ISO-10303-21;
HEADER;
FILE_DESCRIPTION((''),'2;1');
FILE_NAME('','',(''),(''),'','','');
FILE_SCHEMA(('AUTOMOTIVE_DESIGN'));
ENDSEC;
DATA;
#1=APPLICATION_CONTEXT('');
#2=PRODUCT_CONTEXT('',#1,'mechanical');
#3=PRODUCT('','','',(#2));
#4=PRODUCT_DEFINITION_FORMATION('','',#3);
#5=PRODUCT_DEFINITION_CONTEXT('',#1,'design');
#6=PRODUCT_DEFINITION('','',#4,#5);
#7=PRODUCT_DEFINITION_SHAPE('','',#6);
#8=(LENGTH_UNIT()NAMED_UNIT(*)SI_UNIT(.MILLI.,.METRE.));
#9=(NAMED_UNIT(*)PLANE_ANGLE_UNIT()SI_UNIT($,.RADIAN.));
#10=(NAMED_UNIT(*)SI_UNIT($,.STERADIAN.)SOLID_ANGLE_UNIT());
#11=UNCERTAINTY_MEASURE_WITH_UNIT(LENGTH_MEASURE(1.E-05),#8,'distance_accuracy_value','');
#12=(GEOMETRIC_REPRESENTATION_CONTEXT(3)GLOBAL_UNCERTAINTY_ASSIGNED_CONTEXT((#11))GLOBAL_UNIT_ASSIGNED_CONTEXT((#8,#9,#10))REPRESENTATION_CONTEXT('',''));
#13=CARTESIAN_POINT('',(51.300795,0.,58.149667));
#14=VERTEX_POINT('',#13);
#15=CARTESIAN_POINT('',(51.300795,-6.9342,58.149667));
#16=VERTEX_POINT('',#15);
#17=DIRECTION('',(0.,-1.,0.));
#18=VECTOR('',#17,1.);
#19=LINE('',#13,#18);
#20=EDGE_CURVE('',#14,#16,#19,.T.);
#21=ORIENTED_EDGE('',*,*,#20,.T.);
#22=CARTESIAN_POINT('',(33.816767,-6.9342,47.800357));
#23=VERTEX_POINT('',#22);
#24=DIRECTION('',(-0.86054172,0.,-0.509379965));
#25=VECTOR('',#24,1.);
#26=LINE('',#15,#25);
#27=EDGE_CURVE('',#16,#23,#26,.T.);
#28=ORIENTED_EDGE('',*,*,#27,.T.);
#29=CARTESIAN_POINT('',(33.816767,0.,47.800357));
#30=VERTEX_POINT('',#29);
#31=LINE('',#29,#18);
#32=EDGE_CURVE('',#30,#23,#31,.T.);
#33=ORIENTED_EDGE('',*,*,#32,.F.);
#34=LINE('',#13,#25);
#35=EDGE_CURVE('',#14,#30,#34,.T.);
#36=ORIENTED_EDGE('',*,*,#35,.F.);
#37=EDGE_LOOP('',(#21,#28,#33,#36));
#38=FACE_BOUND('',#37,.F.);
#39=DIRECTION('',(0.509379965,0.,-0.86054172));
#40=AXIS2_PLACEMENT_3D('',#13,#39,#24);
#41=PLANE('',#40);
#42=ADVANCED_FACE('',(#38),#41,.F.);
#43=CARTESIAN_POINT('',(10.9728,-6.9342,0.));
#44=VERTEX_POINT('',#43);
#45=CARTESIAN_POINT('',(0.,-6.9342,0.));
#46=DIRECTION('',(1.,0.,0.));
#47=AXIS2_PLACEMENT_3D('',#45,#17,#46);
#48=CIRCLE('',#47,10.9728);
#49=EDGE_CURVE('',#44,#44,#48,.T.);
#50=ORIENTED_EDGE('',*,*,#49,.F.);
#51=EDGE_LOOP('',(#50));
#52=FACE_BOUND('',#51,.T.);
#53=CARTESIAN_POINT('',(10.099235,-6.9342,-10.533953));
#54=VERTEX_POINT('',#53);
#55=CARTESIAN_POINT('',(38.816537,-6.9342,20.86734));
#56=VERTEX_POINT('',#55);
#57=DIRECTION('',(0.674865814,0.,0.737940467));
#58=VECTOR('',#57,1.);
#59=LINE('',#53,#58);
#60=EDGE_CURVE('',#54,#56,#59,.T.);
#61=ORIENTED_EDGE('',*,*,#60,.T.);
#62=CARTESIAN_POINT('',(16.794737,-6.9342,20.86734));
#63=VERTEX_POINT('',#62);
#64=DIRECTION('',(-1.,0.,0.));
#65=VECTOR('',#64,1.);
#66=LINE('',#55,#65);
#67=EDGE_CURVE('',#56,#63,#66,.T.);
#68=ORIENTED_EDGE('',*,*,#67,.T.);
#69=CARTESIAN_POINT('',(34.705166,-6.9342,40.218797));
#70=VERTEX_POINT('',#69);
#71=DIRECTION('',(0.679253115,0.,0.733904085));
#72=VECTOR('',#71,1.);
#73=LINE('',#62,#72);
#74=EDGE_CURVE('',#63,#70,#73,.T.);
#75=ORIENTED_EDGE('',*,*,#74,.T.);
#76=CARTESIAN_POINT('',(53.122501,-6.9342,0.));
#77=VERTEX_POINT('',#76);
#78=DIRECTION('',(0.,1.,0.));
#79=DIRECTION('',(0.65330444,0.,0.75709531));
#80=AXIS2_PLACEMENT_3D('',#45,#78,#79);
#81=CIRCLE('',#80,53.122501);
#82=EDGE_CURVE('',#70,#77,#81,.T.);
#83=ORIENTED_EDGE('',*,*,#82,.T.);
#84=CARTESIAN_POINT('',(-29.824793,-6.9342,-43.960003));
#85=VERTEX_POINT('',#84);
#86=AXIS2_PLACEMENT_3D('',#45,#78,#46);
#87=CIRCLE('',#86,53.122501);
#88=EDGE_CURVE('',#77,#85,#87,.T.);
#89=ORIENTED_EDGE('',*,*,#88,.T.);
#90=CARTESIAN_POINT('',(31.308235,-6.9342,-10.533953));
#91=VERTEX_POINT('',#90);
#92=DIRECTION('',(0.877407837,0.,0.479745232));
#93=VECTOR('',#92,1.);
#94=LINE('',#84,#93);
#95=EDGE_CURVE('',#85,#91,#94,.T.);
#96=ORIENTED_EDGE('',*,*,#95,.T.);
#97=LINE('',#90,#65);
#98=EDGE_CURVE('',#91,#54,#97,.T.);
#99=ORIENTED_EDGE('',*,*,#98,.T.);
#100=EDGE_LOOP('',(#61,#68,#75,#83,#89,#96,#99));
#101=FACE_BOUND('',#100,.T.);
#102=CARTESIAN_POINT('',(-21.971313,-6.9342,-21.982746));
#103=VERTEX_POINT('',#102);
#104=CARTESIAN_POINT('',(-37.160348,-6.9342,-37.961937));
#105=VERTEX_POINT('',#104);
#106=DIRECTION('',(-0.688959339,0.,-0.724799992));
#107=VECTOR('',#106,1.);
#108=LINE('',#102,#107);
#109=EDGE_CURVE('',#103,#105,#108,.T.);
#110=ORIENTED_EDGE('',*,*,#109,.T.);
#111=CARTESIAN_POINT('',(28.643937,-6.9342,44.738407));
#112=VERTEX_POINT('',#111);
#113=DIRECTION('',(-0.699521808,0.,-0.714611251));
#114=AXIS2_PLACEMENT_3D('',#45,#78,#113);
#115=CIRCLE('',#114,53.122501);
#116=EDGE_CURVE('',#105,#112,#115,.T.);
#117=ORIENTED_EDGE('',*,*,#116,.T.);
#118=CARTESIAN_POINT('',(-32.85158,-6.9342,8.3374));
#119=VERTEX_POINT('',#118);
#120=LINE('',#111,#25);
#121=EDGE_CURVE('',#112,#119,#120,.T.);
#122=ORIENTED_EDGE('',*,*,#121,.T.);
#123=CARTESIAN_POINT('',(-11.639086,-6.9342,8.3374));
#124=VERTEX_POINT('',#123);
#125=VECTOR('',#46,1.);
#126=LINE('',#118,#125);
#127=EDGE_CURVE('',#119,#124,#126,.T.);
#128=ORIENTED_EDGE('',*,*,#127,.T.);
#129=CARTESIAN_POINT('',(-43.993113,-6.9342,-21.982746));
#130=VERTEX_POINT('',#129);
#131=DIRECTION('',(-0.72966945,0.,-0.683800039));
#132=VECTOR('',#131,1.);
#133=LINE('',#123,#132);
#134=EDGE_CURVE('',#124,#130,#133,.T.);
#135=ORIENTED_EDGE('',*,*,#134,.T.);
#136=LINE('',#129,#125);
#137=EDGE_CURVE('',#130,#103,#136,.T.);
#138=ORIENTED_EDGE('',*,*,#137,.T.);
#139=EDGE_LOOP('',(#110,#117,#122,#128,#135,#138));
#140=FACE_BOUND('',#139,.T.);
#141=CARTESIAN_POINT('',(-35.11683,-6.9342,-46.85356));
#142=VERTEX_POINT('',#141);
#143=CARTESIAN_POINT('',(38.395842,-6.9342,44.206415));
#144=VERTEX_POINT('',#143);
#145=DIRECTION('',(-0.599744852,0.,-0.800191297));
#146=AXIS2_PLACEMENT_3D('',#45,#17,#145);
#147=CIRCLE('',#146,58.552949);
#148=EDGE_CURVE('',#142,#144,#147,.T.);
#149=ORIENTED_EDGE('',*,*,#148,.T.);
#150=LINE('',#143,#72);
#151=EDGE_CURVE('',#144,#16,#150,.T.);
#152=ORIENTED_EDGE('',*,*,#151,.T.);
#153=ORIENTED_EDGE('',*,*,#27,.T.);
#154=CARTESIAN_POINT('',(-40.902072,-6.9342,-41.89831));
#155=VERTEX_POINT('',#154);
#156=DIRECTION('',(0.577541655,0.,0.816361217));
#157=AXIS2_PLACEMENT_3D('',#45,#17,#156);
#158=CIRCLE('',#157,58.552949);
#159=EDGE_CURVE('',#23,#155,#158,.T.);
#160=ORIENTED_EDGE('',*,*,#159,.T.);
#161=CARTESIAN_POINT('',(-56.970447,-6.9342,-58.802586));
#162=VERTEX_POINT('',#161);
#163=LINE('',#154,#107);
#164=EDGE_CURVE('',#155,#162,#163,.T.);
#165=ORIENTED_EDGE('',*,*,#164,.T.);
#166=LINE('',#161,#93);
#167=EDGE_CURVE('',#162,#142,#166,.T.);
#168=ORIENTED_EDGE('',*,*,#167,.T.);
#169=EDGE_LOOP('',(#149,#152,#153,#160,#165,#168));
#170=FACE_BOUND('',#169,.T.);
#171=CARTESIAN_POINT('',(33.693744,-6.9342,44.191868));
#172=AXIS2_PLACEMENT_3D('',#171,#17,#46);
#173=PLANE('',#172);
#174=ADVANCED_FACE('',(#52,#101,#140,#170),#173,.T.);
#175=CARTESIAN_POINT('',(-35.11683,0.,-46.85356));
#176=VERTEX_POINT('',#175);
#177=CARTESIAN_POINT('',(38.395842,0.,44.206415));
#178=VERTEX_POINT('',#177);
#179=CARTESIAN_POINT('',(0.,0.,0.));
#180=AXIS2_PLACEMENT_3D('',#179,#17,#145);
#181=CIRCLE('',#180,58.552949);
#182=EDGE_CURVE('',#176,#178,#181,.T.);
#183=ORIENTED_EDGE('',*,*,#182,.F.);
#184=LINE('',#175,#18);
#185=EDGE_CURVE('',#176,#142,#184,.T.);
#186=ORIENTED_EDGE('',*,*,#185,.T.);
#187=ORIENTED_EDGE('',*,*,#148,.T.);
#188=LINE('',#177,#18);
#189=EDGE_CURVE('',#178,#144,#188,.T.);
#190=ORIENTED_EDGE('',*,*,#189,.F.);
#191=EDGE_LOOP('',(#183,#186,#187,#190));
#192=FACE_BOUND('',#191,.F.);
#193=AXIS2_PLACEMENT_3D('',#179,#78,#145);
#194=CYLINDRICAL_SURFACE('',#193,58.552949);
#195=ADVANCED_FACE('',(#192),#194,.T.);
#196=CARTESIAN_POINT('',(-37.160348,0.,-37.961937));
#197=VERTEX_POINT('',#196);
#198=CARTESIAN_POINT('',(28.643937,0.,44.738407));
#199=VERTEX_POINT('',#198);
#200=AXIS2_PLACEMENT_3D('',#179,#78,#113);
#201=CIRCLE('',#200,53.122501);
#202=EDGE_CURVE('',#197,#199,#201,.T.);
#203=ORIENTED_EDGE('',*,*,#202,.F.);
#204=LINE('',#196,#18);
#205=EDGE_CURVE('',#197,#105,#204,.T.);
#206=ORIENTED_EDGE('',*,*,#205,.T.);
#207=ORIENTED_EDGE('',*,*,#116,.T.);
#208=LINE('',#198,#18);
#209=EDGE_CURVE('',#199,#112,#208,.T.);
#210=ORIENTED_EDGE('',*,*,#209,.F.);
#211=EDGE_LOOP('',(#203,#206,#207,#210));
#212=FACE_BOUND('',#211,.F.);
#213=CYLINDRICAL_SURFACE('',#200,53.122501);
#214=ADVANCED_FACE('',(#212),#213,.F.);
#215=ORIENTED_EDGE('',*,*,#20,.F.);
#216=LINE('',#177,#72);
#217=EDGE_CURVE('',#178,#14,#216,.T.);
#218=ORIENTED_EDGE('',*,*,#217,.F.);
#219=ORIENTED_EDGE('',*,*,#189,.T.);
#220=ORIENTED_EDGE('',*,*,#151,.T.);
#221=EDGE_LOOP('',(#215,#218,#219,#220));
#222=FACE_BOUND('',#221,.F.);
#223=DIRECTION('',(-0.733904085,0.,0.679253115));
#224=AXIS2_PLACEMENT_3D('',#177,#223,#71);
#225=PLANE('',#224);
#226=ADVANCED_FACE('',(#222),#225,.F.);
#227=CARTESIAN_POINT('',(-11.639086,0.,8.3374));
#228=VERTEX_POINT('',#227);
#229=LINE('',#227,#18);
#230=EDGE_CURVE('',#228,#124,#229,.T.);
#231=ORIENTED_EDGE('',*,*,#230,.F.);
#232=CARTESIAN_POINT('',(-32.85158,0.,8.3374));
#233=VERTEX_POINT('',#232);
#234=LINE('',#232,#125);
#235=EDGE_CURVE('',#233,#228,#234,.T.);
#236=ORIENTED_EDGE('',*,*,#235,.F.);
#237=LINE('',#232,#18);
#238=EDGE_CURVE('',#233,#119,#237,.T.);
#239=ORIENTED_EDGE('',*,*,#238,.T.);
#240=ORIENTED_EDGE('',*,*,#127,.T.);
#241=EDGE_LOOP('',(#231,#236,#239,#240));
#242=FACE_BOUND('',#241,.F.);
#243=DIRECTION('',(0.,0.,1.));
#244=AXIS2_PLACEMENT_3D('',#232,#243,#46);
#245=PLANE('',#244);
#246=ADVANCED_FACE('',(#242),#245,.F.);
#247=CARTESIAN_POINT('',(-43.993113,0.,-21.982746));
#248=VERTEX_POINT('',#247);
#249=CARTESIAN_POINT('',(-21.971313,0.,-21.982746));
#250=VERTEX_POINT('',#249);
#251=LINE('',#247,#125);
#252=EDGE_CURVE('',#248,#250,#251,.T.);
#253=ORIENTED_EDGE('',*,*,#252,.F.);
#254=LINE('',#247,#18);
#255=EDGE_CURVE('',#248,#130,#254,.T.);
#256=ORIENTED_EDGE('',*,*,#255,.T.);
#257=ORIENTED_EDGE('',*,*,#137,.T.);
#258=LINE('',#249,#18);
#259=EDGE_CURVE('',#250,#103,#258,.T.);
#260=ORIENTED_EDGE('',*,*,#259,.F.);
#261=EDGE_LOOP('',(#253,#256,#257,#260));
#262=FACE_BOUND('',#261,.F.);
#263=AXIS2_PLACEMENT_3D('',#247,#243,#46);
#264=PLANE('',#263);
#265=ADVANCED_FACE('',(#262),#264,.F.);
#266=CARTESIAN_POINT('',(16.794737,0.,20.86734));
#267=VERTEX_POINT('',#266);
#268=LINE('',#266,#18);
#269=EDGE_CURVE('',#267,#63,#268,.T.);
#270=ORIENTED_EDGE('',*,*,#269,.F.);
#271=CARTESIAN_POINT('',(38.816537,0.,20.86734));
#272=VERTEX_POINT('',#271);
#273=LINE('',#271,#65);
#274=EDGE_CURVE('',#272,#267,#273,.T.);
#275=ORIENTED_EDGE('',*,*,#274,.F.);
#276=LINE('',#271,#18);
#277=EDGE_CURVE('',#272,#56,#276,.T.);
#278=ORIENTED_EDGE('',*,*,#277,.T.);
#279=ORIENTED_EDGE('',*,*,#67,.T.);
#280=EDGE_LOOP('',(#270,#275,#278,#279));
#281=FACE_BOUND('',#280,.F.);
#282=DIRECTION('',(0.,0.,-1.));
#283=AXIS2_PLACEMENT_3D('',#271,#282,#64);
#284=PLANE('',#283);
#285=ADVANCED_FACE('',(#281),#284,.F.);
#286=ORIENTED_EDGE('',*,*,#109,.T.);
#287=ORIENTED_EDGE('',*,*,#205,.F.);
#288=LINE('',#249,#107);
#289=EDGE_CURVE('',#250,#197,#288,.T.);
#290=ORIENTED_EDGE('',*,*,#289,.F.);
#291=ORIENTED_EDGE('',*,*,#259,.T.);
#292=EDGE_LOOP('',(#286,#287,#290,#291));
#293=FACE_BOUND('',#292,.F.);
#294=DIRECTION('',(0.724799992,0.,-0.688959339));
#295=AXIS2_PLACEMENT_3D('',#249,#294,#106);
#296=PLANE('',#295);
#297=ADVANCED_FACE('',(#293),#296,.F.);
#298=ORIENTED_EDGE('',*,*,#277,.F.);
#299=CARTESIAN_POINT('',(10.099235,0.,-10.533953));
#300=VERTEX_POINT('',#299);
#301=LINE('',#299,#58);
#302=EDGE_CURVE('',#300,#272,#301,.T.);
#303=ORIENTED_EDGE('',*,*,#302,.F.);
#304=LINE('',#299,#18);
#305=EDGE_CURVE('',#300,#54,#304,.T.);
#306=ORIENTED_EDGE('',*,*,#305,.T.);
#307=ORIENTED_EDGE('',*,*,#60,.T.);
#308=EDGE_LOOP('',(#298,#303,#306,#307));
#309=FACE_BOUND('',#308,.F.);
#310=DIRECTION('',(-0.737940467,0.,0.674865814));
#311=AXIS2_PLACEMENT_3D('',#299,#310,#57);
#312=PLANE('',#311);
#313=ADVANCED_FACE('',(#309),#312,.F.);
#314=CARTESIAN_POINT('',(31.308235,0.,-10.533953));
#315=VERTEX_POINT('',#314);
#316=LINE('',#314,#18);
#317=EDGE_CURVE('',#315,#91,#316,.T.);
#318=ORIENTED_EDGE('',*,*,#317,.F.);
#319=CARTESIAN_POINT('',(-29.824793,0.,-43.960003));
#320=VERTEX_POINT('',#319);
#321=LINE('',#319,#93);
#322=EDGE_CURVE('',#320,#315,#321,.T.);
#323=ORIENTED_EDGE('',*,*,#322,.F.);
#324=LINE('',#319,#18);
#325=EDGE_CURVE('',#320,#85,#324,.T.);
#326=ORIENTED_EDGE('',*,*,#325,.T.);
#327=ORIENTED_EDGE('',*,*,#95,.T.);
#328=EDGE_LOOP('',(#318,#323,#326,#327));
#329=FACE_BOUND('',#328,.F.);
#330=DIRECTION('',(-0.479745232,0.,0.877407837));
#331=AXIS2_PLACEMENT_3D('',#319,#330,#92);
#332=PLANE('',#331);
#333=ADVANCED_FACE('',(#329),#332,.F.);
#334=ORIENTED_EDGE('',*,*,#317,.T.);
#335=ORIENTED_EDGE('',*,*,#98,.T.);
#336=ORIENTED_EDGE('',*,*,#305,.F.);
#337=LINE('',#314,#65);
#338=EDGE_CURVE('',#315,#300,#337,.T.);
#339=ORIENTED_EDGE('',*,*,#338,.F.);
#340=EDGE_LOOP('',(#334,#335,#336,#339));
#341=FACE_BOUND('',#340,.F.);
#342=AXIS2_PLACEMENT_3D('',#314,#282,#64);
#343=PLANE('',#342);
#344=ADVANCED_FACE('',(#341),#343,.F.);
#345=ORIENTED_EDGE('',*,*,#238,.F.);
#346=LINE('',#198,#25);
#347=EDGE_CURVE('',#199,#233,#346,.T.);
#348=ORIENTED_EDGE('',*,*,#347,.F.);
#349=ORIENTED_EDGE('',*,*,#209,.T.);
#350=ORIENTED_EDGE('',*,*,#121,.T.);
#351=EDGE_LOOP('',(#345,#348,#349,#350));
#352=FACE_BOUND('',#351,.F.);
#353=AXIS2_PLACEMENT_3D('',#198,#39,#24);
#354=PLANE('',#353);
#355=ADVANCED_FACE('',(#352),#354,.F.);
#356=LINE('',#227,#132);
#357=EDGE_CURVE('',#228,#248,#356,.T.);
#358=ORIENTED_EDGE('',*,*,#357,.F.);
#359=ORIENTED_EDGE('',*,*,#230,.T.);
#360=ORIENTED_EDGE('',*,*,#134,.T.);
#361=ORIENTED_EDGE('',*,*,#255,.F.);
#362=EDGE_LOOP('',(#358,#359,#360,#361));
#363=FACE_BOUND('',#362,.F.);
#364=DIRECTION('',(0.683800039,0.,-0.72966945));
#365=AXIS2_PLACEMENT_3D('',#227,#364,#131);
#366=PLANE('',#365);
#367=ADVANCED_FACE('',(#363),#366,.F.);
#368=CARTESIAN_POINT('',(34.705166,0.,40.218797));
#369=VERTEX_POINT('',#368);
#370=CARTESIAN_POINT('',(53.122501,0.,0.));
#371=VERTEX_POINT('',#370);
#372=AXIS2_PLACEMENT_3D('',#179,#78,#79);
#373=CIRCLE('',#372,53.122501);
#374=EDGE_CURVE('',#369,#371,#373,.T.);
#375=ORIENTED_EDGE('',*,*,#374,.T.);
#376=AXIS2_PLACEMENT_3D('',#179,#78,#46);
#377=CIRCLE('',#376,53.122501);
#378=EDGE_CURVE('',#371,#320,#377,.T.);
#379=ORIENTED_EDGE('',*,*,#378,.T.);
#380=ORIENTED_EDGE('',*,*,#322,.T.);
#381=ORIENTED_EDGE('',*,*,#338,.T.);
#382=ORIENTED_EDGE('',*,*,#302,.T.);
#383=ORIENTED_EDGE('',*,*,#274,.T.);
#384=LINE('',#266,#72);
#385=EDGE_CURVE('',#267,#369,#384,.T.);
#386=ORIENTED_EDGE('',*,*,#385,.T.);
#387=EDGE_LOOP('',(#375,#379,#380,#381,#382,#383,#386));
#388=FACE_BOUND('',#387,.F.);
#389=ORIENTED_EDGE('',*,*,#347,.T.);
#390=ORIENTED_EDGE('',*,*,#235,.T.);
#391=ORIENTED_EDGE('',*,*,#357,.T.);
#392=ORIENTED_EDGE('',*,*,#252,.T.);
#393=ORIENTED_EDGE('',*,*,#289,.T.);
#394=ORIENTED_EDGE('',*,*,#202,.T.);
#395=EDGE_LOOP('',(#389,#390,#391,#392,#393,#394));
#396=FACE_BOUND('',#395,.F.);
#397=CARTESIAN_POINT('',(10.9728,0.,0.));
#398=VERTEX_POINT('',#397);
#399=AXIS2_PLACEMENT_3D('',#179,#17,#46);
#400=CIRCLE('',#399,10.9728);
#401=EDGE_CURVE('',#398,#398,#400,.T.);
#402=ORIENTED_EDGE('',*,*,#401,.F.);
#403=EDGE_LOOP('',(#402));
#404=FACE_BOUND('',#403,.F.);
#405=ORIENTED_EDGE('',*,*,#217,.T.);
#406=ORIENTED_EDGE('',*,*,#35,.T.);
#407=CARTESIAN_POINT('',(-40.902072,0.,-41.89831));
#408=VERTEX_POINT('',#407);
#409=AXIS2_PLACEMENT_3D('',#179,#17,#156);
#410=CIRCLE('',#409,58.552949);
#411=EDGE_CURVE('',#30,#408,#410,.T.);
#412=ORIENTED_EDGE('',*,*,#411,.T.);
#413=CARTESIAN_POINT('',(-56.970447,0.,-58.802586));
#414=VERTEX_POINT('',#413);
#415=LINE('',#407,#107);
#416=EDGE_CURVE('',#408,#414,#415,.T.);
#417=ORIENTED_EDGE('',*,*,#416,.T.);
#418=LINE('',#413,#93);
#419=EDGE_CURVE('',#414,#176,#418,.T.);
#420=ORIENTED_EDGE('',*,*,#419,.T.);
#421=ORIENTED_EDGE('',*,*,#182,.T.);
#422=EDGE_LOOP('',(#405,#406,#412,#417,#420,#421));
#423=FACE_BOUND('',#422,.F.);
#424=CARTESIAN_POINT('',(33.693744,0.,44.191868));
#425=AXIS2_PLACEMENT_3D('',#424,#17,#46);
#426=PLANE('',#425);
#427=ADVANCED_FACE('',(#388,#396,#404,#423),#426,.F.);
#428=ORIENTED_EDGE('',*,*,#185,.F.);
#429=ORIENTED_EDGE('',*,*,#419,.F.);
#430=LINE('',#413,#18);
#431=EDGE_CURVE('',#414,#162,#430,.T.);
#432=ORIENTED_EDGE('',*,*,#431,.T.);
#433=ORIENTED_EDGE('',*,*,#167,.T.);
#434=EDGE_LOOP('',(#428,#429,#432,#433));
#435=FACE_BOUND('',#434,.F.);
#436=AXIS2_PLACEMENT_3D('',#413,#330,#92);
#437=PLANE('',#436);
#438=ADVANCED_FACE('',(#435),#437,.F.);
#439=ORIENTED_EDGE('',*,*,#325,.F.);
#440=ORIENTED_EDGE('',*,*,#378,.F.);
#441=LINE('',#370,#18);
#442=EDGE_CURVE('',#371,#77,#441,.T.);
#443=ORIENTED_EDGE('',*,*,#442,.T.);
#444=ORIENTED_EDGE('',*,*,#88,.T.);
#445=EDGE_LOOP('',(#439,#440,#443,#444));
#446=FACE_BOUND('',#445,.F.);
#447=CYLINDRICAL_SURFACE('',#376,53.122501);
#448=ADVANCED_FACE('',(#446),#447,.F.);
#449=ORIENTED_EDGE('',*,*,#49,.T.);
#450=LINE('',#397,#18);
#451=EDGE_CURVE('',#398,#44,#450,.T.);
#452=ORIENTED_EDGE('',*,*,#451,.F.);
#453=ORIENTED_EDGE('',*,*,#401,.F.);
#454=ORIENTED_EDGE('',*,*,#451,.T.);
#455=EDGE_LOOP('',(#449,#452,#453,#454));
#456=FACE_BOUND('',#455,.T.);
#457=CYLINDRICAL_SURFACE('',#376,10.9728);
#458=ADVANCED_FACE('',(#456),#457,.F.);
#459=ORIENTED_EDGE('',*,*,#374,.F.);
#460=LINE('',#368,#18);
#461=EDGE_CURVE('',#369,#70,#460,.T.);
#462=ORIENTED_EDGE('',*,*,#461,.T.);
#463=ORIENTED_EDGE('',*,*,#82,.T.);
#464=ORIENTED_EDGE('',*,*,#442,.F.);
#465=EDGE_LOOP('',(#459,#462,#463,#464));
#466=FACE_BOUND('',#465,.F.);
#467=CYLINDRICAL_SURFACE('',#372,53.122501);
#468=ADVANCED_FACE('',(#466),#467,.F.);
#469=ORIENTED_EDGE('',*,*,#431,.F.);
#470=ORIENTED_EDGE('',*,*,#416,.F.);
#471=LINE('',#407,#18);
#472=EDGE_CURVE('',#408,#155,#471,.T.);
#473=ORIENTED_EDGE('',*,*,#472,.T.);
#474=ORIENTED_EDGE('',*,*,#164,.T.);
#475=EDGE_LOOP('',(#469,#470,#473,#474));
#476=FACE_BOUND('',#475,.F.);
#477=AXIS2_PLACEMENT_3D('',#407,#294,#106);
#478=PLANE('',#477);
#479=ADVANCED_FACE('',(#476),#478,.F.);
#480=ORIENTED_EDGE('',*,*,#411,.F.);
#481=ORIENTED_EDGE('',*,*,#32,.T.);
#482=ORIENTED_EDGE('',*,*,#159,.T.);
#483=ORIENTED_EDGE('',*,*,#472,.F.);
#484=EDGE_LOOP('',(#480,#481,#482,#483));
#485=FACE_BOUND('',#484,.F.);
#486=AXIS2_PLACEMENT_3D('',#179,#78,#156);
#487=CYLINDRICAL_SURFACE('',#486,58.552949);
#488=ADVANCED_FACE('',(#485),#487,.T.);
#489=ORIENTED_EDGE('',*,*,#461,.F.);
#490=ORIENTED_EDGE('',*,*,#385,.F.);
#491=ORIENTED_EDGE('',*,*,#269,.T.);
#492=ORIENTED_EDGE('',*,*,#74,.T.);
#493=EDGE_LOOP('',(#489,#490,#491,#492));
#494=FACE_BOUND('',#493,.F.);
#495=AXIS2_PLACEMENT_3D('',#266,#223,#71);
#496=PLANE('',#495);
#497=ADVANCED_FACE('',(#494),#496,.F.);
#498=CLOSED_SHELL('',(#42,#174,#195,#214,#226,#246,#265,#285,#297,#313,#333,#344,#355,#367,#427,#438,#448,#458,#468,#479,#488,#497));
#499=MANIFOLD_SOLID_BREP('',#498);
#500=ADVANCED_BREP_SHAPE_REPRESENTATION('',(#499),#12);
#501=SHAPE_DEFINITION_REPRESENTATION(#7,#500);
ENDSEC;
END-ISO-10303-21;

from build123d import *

# Parameters (mm, degrees)
F0_R     = 10.9728
F1_DEPTH = 6.9342


# Not quite as in the source:
# - a feature names something its author has since deleted; it is built from what else it names


with BuildPart() as f1:
    # F0 (on Front) → F1 (new body)
    with BuildSketch(Plane.XZ):
        with BuildLine():
            ThreePointArc((28.6439371533, 44.738406593), (31.7550616118, 42.5865732614), (34.7051660635, 40.2187967078))
            Line((34.7051660635, 40.2187967078), (38.3958422982, 44.2064153225))
            ThreePointArc((38.3958422982, 44.2064153225), (36.1509937048, 46.060324745), (33.8167671779, 47.8003568929))
            Line((33.8167671779, 47.8003568929), (28.6439371533, 44.738406593))
        make_face()
        with BuildLine():
            Line((38.3958422982, 44.2064153225), (34.7051660635, 40.2187967078))
            ThreePointArc((34.7051660635, 40.2187967078), (48.2991997583, 22.1175826623), (53.1225014483, 0))
            ThreePointArc((53.1225014483, 0), (24.8760182095, -46.9380855826), (-29.8247927528, -43.9600033823))
            Line((-29.8247927528, -43.9600033823), (-35.1168298869, -46.8535603786))
            ThreePointArc((-35.1168298869, -46.8535603786), (26.1940251259, -52.3671739658), (58.5529492123, 0))
            ThreePointArc((58.5529492123, 0), (53.2758747723, 24.2925714716), (38.3958422982, 44.2064153225))
        make_face()
        with BuildLine():
            ThreePointArc((33.8167671779, 47.8003568929), (36.1509937048, 46.060324745), (38.3958422982, 44.2064153225))
            Line((38.3958422982, 44.2064153225), (51.3007947444, 58.1496672696))
            Line((51.3007947444, 58.1496672696), (33.8167671779, 47.8003568929))
        make_face()
        with BuildLine():
            ThreePointArc((-37.1603482471, -37.9619372303), (-41.568846888, 33.0761413789), (28.6439371533, 44.738406593))
            Line((28.6439371533, 44.738406593), (33.8167671779, 47.8003568929))
            ThreePointArc((33.8167671779, 47.8003568929), (-44.9890332079, 37.475788884), (-40.9020715179, -41.898310312))
            Line((-40.9020715179, -41.898310312), (-37.1603482471, -37.9619372303))
        make_face()
        with BuildLine():
            Line((-35.1168298869, -46.8535603786), (-29.8247927528, -43.9600033823))
            ThreePointArc((-29.8247927528, -43.9600033823), (-33.6265739867, -41.1248547965), (-37.1603482471, -37.9619372303))
            Line((-37.1603482471, -37.9619372303), (-40.9020715179, -41.898310312))
            ThreePointArc((-40.9020715179, -41.898310312), (-38.090116415, -44.4701123559), (-35.1168298869, -46.8535603786))
        make_face()
        with BuildLine():
            Line((-56.9704473019, -58.8025860488), (-35.1168298869, -46.8535603786))
            ThreePointArc((-35.1168298869, -46.8535603786), (-38.090116415, -44.4701123559), (-40.9020715179, -41.898310312))
            Line((-40.9020715179, -41.898310312), (-56.9704473019, -58.8025860488))
        make_face()
        with BuildLine():
            Line((38.8165365087, 20.8673397533), (16.7947365087, 20.8673397533))
            Line((16.7947365087, 20.8673397533), (34.7051660635, 40.2187967078))
            ThreePointArc((34.7051660635, 40.2187967078), (31.7550616118, 42.5865732614), (28.6439371533, 44.738406593))
            Line((28.6439371533, 44.738406593), (-32.8515800228, 8.3374004968))
            Line((-32.8515800228, 8.3374004968), (-11.6390858311, 8.3374004968))
            Line((-11.6390858311, 8.3374004968), (-43.993112864, -21.982746443))
            Line((-43.993112864, -21.982746443), (-21.971312864, -21.982746443))
            Line((-21.971312864, -21.982746443), (-37.1603482471, -37.9619372303))
            ThreePointArc((-37.1603482471, -37.9619372303), (-33.6265739867, -41.1248547965), (-29.8247927528, -43.9600033823))
            Line((-29.8247927528, -43.9600033823), (31.308234758, -10.5339530787))
            Line((31.308234758, -10.5339530787), (10.099234758, -10.5339530787))
            Line((10.099234758, -10.5339530787), (38.8165365087, 20.8673397533))
        make_face()
        Circle(F0_R, mode=Mode.SUBTRACT)
    extrude(amount=F1_DEPTH)


solid = f1.part
